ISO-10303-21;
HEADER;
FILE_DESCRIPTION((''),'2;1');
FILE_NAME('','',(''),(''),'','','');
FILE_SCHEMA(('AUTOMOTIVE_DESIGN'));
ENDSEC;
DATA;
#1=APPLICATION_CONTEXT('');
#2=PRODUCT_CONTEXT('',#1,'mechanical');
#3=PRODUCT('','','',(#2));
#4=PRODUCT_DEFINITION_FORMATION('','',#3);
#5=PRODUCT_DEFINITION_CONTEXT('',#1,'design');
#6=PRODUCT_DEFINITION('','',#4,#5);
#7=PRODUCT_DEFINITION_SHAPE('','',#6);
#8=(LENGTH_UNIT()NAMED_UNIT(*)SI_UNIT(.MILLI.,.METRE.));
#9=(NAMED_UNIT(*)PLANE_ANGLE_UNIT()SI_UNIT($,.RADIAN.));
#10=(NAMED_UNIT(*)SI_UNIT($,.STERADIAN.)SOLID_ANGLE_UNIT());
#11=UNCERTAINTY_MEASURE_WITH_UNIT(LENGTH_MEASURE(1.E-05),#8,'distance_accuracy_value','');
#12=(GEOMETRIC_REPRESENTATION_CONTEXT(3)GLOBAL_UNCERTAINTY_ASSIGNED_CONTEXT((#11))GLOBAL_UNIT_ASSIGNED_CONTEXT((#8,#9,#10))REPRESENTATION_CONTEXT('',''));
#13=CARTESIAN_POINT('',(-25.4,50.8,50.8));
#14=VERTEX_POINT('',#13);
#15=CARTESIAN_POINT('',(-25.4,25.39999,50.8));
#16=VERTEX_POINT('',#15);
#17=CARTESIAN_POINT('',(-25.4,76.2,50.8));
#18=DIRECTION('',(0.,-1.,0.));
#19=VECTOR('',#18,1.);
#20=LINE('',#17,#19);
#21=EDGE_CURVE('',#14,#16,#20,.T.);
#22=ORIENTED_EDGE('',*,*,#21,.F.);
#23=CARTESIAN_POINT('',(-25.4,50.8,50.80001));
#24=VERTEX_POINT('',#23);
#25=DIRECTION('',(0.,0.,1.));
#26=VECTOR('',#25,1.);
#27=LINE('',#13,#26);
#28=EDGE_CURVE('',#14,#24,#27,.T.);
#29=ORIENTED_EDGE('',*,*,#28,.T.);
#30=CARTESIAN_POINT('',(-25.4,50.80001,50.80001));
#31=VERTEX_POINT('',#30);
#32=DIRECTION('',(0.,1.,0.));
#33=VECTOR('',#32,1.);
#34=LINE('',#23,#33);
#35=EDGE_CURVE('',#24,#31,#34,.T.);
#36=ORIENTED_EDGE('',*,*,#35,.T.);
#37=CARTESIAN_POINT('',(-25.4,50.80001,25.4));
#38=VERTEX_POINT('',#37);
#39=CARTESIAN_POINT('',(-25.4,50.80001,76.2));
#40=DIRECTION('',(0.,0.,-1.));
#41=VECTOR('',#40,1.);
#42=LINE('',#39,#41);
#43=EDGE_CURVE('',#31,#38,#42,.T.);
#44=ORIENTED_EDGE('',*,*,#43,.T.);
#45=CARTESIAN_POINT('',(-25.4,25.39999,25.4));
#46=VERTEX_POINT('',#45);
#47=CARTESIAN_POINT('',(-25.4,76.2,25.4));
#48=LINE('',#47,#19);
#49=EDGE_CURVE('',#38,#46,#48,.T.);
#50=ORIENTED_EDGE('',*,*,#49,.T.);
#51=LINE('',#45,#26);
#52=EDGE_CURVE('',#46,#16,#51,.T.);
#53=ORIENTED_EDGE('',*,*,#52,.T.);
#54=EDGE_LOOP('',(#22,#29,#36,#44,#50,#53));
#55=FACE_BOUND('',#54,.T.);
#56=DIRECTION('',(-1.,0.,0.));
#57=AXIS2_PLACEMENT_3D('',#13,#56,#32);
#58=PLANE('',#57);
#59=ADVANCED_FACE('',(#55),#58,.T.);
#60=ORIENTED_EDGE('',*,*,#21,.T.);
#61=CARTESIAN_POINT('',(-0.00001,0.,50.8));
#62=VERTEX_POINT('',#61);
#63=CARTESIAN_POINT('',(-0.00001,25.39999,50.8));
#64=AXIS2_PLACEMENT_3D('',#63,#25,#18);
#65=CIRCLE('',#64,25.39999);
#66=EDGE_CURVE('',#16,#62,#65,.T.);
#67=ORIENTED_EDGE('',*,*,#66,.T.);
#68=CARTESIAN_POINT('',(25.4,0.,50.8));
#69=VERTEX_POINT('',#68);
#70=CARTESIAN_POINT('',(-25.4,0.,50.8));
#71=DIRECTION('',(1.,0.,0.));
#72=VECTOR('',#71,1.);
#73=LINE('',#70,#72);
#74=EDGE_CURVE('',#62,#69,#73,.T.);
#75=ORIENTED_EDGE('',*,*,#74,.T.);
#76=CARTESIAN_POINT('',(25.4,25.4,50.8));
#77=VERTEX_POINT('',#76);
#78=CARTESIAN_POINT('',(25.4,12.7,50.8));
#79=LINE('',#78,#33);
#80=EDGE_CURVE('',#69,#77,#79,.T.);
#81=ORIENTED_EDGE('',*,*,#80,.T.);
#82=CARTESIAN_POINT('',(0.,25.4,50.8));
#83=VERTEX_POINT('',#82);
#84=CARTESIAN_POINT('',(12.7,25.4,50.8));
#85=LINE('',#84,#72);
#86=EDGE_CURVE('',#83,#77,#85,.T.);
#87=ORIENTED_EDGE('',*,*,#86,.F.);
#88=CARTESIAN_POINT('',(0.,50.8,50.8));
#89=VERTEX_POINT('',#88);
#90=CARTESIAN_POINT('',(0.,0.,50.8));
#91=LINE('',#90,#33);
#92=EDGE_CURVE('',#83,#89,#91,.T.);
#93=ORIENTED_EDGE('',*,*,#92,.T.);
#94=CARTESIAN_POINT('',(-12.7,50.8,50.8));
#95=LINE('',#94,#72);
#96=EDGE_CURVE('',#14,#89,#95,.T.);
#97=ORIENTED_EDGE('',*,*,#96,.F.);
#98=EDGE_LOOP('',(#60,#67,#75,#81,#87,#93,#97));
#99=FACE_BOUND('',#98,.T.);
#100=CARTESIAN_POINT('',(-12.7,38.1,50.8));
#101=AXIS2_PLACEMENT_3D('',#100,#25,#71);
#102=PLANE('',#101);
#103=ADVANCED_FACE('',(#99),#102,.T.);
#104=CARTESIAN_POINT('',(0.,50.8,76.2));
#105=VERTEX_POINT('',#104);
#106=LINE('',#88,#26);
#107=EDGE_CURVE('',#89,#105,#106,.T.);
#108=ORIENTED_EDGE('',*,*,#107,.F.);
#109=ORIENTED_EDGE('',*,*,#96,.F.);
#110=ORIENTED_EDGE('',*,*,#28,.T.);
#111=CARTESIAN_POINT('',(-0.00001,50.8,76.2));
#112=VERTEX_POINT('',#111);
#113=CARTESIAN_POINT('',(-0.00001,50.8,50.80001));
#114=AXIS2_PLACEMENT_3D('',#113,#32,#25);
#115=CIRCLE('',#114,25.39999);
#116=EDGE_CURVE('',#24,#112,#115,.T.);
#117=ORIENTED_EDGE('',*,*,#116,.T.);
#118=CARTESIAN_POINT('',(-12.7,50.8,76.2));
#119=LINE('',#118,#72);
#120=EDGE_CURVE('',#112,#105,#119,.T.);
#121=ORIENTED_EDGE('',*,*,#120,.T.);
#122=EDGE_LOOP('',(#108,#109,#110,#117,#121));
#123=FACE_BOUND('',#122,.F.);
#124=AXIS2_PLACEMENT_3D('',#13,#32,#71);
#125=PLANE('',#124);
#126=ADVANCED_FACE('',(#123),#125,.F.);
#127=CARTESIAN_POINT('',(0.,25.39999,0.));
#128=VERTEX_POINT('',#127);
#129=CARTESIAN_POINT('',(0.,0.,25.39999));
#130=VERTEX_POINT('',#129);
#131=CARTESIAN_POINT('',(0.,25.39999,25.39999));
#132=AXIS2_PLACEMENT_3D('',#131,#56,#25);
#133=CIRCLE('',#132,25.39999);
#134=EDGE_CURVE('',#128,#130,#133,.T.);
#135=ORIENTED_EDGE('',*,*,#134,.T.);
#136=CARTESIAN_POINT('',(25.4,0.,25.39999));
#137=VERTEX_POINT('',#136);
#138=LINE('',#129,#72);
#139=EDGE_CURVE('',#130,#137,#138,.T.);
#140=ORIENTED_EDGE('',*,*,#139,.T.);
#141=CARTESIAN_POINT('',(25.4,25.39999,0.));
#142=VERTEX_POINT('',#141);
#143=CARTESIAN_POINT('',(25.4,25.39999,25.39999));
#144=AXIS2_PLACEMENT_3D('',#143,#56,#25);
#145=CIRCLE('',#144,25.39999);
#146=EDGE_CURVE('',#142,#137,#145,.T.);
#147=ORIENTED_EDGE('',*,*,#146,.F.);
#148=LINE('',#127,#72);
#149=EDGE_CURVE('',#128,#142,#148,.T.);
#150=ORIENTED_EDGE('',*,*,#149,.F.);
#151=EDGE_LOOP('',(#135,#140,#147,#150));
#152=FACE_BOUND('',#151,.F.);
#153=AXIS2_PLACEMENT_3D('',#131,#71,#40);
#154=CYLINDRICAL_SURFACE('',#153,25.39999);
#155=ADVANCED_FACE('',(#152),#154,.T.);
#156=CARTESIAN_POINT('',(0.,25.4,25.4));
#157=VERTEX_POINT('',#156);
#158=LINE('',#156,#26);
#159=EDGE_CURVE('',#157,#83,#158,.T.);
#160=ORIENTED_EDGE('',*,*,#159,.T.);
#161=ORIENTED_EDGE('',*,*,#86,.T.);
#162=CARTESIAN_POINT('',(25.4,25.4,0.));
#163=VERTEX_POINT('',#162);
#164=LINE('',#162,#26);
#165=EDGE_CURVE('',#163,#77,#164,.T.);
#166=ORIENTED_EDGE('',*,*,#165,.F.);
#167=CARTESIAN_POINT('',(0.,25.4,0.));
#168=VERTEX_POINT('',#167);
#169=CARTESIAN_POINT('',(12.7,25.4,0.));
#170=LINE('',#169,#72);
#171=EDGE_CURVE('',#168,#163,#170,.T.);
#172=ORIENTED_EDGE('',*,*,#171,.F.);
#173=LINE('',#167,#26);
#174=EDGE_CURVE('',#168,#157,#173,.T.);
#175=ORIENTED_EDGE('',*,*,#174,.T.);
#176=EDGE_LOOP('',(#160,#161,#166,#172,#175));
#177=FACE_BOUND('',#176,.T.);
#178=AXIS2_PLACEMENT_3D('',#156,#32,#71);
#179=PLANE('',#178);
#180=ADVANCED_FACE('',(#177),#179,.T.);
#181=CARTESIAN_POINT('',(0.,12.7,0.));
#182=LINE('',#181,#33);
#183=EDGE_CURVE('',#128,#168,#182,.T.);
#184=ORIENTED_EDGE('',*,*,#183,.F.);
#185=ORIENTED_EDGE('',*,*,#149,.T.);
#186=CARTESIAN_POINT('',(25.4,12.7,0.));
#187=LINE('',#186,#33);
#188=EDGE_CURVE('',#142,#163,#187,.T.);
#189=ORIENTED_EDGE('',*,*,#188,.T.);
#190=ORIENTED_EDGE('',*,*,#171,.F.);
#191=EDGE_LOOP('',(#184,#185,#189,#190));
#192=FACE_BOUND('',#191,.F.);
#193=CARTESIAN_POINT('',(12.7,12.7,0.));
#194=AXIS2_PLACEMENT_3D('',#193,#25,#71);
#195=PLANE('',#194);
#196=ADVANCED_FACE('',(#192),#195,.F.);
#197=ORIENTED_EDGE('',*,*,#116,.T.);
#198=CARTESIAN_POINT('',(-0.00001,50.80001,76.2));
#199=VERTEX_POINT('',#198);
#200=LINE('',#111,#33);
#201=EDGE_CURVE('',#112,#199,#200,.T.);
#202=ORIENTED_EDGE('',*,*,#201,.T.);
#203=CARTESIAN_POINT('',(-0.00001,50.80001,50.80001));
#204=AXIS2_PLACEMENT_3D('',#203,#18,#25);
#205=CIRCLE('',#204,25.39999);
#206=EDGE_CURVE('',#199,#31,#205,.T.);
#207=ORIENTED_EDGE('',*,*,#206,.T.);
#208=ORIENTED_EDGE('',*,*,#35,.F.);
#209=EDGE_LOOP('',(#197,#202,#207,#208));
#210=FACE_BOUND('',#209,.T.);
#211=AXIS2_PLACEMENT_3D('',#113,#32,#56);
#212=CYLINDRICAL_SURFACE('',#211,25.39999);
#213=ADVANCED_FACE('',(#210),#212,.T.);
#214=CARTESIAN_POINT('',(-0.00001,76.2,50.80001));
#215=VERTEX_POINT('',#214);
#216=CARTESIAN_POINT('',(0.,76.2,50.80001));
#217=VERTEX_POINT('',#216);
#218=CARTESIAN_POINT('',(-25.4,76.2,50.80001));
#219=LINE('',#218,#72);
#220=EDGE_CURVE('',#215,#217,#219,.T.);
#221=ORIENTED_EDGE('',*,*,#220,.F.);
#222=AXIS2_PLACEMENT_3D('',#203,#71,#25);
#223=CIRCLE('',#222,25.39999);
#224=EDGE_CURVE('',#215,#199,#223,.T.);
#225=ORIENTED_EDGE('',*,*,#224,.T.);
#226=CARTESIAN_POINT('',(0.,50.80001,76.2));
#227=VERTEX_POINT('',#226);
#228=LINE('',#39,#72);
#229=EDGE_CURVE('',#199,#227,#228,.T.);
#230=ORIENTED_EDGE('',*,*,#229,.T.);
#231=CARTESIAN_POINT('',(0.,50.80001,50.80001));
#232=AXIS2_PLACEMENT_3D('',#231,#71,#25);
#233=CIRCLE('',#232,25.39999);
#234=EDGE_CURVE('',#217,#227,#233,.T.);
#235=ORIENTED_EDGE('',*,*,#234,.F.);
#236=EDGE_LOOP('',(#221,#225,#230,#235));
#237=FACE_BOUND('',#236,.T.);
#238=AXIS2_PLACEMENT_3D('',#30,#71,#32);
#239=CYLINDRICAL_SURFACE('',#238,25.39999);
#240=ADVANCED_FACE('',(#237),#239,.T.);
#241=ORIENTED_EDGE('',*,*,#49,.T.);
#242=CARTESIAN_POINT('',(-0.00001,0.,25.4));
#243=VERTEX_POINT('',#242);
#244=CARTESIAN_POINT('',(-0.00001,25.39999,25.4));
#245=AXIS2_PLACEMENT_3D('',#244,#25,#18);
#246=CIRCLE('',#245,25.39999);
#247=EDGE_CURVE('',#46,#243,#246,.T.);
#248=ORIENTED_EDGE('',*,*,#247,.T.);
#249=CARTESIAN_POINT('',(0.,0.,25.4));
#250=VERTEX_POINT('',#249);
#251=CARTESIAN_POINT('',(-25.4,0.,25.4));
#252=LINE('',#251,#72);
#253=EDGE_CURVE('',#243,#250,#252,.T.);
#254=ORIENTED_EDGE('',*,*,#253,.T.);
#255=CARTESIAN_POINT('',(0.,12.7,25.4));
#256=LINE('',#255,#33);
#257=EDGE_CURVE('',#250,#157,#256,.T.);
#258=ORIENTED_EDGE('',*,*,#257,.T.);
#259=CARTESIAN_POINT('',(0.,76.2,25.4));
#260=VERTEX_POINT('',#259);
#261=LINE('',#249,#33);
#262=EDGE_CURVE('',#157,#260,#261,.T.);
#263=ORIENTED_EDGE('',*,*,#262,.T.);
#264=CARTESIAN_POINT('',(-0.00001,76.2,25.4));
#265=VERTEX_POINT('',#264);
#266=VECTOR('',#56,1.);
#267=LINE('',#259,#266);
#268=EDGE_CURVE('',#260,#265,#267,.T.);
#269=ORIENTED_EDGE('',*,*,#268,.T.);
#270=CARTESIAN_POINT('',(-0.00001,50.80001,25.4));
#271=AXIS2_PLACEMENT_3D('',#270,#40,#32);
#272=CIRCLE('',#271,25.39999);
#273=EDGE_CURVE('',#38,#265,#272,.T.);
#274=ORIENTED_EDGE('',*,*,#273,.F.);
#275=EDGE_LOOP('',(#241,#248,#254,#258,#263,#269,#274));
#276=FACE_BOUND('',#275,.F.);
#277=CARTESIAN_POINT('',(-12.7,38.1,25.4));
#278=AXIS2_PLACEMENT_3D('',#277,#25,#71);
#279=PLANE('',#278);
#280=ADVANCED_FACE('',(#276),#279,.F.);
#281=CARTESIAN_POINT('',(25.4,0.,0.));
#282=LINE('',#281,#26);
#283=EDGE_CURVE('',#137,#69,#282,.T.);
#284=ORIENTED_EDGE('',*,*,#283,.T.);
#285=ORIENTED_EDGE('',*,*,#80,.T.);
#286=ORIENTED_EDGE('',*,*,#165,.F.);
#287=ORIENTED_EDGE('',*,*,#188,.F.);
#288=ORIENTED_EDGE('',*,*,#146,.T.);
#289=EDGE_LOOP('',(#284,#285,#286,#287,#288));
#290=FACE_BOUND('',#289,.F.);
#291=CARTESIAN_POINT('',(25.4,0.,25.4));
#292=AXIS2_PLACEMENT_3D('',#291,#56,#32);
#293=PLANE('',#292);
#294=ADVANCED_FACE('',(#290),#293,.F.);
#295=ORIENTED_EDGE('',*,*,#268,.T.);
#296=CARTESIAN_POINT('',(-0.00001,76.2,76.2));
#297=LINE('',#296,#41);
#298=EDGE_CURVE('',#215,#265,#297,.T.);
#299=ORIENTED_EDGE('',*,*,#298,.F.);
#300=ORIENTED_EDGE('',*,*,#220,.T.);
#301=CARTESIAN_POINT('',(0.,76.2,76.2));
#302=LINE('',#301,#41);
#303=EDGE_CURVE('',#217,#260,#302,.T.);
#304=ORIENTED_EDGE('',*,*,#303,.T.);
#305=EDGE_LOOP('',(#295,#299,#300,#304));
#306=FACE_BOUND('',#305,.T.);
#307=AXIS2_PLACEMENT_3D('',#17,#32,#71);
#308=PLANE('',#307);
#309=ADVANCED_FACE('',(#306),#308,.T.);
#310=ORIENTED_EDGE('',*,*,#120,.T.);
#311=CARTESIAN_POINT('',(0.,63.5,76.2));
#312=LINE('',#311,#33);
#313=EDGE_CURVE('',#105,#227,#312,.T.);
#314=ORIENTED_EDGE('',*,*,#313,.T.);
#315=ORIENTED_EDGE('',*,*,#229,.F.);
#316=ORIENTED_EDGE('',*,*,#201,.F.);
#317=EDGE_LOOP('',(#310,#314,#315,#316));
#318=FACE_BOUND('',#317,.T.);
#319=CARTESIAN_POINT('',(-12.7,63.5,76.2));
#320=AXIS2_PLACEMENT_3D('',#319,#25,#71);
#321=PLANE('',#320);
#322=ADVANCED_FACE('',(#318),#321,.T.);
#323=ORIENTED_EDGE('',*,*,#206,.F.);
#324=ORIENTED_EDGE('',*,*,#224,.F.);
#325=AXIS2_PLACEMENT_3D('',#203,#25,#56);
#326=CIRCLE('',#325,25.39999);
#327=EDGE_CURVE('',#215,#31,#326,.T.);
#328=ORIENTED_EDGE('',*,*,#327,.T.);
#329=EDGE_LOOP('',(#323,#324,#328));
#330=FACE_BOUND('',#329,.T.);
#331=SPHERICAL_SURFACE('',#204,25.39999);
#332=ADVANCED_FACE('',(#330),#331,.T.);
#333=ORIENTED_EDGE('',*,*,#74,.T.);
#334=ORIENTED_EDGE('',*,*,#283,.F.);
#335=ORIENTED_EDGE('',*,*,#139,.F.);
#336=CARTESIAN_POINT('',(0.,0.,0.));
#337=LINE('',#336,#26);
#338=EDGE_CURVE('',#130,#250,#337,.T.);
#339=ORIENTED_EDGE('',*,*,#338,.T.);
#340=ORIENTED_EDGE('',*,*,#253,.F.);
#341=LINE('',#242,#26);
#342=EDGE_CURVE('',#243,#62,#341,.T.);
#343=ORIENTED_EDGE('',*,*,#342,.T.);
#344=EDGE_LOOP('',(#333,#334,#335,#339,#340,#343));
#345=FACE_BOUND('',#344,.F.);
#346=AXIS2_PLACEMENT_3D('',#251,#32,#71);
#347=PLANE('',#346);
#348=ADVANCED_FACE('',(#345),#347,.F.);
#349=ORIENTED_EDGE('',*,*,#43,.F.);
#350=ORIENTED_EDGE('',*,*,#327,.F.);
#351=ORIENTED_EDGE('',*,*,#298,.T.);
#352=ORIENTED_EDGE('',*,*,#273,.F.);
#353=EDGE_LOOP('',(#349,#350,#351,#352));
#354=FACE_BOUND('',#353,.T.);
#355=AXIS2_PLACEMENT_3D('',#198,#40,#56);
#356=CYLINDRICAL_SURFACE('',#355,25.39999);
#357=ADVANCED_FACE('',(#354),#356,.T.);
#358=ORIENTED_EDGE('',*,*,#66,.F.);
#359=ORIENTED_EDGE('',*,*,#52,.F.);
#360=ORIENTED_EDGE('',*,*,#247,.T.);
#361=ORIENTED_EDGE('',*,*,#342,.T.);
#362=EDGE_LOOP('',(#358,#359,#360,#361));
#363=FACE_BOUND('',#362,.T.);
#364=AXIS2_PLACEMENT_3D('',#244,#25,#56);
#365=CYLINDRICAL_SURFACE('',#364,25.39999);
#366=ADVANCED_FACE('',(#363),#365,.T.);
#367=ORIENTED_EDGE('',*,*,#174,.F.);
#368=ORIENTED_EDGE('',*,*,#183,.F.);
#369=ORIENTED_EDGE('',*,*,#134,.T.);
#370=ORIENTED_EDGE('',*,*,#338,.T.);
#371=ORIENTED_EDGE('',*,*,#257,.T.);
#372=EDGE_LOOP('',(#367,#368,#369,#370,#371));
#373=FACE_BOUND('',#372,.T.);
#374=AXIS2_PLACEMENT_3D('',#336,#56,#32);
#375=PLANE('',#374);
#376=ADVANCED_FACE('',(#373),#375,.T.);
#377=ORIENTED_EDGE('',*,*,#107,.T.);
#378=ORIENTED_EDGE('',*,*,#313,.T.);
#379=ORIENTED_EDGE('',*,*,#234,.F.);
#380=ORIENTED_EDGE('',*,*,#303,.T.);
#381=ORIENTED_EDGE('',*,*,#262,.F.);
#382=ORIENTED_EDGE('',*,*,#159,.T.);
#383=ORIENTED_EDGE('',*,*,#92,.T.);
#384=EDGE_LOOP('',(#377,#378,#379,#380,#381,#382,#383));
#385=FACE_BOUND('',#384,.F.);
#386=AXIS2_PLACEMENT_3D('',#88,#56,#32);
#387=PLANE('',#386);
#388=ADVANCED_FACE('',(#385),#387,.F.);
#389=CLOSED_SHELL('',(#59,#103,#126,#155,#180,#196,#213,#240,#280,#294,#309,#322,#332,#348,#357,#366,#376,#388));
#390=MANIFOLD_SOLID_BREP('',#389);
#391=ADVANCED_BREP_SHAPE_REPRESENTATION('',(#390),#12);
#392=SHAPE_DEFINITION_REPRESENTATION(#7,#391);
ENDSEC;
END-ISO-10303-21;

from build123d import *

# Parameters (mm, degrees)
F0_W     = 25.4
F0_H     = 25.4
F1_DEPTH = 25.4
F2_W     = 25.4
F2_H     = 25.4
F3_DEPTH = 25.4
F4_W     = 25.4
F4_H     = 25.4
F5_DEPTH = 25.4
F6_R     = 25.39999


# Not quite as in the source:
# - a fillet or chamfer is up to 0.001 mm smaller than in the source, because OpenCascade refuses the exact size


with BuildPart() as f1:
    # F0 (on Top) → F1 (new body)
    with BuildSketch(Plane.XY):
        with Locations((12.7, 12.7)):
            Rectangle(F0_W, F0_H)
    extrude(amount=F1_DEPTH)

    # F2 (on face) → F3 (join)
    with BuildSketch(Plane.XY.offset(25.4)):
        Polygon((-25.4, 0), (0, 0), (0, 25.4), (0, 76.2), (-25.4, 76.2), align=None)
        with Locations((12.7, 12.7)):
            Rectangle(F2_W, F2_H)
    extrude(amount=F3_DEPTH)

    # F4 (on face) → F5 (join)
    with BuildSketch(Plane.XY.offset(50.8)):
        with Locations((-12.7, 63.5)):
            Rectangle(F4_W, F4_H)
    extrude(amount=F5_DEPTH)

    # F6 (radius 25.4 in the source; OpenCascade refuses exactly that, so slightly less here)
    f6_edges = [f1.edges().sort_by_distance(p)[0] for p in [
        (12.7, 0, 0),
        (-25.4, 0, 38.1),
        (-25.4, 63.5, 76.2),
        (-12.7, 76.2, 76.2),
        (-25.4, 76.2, 50.8),
    ]]
    fillet(f6_edges, radius=F6_R)


solid = f1.part
